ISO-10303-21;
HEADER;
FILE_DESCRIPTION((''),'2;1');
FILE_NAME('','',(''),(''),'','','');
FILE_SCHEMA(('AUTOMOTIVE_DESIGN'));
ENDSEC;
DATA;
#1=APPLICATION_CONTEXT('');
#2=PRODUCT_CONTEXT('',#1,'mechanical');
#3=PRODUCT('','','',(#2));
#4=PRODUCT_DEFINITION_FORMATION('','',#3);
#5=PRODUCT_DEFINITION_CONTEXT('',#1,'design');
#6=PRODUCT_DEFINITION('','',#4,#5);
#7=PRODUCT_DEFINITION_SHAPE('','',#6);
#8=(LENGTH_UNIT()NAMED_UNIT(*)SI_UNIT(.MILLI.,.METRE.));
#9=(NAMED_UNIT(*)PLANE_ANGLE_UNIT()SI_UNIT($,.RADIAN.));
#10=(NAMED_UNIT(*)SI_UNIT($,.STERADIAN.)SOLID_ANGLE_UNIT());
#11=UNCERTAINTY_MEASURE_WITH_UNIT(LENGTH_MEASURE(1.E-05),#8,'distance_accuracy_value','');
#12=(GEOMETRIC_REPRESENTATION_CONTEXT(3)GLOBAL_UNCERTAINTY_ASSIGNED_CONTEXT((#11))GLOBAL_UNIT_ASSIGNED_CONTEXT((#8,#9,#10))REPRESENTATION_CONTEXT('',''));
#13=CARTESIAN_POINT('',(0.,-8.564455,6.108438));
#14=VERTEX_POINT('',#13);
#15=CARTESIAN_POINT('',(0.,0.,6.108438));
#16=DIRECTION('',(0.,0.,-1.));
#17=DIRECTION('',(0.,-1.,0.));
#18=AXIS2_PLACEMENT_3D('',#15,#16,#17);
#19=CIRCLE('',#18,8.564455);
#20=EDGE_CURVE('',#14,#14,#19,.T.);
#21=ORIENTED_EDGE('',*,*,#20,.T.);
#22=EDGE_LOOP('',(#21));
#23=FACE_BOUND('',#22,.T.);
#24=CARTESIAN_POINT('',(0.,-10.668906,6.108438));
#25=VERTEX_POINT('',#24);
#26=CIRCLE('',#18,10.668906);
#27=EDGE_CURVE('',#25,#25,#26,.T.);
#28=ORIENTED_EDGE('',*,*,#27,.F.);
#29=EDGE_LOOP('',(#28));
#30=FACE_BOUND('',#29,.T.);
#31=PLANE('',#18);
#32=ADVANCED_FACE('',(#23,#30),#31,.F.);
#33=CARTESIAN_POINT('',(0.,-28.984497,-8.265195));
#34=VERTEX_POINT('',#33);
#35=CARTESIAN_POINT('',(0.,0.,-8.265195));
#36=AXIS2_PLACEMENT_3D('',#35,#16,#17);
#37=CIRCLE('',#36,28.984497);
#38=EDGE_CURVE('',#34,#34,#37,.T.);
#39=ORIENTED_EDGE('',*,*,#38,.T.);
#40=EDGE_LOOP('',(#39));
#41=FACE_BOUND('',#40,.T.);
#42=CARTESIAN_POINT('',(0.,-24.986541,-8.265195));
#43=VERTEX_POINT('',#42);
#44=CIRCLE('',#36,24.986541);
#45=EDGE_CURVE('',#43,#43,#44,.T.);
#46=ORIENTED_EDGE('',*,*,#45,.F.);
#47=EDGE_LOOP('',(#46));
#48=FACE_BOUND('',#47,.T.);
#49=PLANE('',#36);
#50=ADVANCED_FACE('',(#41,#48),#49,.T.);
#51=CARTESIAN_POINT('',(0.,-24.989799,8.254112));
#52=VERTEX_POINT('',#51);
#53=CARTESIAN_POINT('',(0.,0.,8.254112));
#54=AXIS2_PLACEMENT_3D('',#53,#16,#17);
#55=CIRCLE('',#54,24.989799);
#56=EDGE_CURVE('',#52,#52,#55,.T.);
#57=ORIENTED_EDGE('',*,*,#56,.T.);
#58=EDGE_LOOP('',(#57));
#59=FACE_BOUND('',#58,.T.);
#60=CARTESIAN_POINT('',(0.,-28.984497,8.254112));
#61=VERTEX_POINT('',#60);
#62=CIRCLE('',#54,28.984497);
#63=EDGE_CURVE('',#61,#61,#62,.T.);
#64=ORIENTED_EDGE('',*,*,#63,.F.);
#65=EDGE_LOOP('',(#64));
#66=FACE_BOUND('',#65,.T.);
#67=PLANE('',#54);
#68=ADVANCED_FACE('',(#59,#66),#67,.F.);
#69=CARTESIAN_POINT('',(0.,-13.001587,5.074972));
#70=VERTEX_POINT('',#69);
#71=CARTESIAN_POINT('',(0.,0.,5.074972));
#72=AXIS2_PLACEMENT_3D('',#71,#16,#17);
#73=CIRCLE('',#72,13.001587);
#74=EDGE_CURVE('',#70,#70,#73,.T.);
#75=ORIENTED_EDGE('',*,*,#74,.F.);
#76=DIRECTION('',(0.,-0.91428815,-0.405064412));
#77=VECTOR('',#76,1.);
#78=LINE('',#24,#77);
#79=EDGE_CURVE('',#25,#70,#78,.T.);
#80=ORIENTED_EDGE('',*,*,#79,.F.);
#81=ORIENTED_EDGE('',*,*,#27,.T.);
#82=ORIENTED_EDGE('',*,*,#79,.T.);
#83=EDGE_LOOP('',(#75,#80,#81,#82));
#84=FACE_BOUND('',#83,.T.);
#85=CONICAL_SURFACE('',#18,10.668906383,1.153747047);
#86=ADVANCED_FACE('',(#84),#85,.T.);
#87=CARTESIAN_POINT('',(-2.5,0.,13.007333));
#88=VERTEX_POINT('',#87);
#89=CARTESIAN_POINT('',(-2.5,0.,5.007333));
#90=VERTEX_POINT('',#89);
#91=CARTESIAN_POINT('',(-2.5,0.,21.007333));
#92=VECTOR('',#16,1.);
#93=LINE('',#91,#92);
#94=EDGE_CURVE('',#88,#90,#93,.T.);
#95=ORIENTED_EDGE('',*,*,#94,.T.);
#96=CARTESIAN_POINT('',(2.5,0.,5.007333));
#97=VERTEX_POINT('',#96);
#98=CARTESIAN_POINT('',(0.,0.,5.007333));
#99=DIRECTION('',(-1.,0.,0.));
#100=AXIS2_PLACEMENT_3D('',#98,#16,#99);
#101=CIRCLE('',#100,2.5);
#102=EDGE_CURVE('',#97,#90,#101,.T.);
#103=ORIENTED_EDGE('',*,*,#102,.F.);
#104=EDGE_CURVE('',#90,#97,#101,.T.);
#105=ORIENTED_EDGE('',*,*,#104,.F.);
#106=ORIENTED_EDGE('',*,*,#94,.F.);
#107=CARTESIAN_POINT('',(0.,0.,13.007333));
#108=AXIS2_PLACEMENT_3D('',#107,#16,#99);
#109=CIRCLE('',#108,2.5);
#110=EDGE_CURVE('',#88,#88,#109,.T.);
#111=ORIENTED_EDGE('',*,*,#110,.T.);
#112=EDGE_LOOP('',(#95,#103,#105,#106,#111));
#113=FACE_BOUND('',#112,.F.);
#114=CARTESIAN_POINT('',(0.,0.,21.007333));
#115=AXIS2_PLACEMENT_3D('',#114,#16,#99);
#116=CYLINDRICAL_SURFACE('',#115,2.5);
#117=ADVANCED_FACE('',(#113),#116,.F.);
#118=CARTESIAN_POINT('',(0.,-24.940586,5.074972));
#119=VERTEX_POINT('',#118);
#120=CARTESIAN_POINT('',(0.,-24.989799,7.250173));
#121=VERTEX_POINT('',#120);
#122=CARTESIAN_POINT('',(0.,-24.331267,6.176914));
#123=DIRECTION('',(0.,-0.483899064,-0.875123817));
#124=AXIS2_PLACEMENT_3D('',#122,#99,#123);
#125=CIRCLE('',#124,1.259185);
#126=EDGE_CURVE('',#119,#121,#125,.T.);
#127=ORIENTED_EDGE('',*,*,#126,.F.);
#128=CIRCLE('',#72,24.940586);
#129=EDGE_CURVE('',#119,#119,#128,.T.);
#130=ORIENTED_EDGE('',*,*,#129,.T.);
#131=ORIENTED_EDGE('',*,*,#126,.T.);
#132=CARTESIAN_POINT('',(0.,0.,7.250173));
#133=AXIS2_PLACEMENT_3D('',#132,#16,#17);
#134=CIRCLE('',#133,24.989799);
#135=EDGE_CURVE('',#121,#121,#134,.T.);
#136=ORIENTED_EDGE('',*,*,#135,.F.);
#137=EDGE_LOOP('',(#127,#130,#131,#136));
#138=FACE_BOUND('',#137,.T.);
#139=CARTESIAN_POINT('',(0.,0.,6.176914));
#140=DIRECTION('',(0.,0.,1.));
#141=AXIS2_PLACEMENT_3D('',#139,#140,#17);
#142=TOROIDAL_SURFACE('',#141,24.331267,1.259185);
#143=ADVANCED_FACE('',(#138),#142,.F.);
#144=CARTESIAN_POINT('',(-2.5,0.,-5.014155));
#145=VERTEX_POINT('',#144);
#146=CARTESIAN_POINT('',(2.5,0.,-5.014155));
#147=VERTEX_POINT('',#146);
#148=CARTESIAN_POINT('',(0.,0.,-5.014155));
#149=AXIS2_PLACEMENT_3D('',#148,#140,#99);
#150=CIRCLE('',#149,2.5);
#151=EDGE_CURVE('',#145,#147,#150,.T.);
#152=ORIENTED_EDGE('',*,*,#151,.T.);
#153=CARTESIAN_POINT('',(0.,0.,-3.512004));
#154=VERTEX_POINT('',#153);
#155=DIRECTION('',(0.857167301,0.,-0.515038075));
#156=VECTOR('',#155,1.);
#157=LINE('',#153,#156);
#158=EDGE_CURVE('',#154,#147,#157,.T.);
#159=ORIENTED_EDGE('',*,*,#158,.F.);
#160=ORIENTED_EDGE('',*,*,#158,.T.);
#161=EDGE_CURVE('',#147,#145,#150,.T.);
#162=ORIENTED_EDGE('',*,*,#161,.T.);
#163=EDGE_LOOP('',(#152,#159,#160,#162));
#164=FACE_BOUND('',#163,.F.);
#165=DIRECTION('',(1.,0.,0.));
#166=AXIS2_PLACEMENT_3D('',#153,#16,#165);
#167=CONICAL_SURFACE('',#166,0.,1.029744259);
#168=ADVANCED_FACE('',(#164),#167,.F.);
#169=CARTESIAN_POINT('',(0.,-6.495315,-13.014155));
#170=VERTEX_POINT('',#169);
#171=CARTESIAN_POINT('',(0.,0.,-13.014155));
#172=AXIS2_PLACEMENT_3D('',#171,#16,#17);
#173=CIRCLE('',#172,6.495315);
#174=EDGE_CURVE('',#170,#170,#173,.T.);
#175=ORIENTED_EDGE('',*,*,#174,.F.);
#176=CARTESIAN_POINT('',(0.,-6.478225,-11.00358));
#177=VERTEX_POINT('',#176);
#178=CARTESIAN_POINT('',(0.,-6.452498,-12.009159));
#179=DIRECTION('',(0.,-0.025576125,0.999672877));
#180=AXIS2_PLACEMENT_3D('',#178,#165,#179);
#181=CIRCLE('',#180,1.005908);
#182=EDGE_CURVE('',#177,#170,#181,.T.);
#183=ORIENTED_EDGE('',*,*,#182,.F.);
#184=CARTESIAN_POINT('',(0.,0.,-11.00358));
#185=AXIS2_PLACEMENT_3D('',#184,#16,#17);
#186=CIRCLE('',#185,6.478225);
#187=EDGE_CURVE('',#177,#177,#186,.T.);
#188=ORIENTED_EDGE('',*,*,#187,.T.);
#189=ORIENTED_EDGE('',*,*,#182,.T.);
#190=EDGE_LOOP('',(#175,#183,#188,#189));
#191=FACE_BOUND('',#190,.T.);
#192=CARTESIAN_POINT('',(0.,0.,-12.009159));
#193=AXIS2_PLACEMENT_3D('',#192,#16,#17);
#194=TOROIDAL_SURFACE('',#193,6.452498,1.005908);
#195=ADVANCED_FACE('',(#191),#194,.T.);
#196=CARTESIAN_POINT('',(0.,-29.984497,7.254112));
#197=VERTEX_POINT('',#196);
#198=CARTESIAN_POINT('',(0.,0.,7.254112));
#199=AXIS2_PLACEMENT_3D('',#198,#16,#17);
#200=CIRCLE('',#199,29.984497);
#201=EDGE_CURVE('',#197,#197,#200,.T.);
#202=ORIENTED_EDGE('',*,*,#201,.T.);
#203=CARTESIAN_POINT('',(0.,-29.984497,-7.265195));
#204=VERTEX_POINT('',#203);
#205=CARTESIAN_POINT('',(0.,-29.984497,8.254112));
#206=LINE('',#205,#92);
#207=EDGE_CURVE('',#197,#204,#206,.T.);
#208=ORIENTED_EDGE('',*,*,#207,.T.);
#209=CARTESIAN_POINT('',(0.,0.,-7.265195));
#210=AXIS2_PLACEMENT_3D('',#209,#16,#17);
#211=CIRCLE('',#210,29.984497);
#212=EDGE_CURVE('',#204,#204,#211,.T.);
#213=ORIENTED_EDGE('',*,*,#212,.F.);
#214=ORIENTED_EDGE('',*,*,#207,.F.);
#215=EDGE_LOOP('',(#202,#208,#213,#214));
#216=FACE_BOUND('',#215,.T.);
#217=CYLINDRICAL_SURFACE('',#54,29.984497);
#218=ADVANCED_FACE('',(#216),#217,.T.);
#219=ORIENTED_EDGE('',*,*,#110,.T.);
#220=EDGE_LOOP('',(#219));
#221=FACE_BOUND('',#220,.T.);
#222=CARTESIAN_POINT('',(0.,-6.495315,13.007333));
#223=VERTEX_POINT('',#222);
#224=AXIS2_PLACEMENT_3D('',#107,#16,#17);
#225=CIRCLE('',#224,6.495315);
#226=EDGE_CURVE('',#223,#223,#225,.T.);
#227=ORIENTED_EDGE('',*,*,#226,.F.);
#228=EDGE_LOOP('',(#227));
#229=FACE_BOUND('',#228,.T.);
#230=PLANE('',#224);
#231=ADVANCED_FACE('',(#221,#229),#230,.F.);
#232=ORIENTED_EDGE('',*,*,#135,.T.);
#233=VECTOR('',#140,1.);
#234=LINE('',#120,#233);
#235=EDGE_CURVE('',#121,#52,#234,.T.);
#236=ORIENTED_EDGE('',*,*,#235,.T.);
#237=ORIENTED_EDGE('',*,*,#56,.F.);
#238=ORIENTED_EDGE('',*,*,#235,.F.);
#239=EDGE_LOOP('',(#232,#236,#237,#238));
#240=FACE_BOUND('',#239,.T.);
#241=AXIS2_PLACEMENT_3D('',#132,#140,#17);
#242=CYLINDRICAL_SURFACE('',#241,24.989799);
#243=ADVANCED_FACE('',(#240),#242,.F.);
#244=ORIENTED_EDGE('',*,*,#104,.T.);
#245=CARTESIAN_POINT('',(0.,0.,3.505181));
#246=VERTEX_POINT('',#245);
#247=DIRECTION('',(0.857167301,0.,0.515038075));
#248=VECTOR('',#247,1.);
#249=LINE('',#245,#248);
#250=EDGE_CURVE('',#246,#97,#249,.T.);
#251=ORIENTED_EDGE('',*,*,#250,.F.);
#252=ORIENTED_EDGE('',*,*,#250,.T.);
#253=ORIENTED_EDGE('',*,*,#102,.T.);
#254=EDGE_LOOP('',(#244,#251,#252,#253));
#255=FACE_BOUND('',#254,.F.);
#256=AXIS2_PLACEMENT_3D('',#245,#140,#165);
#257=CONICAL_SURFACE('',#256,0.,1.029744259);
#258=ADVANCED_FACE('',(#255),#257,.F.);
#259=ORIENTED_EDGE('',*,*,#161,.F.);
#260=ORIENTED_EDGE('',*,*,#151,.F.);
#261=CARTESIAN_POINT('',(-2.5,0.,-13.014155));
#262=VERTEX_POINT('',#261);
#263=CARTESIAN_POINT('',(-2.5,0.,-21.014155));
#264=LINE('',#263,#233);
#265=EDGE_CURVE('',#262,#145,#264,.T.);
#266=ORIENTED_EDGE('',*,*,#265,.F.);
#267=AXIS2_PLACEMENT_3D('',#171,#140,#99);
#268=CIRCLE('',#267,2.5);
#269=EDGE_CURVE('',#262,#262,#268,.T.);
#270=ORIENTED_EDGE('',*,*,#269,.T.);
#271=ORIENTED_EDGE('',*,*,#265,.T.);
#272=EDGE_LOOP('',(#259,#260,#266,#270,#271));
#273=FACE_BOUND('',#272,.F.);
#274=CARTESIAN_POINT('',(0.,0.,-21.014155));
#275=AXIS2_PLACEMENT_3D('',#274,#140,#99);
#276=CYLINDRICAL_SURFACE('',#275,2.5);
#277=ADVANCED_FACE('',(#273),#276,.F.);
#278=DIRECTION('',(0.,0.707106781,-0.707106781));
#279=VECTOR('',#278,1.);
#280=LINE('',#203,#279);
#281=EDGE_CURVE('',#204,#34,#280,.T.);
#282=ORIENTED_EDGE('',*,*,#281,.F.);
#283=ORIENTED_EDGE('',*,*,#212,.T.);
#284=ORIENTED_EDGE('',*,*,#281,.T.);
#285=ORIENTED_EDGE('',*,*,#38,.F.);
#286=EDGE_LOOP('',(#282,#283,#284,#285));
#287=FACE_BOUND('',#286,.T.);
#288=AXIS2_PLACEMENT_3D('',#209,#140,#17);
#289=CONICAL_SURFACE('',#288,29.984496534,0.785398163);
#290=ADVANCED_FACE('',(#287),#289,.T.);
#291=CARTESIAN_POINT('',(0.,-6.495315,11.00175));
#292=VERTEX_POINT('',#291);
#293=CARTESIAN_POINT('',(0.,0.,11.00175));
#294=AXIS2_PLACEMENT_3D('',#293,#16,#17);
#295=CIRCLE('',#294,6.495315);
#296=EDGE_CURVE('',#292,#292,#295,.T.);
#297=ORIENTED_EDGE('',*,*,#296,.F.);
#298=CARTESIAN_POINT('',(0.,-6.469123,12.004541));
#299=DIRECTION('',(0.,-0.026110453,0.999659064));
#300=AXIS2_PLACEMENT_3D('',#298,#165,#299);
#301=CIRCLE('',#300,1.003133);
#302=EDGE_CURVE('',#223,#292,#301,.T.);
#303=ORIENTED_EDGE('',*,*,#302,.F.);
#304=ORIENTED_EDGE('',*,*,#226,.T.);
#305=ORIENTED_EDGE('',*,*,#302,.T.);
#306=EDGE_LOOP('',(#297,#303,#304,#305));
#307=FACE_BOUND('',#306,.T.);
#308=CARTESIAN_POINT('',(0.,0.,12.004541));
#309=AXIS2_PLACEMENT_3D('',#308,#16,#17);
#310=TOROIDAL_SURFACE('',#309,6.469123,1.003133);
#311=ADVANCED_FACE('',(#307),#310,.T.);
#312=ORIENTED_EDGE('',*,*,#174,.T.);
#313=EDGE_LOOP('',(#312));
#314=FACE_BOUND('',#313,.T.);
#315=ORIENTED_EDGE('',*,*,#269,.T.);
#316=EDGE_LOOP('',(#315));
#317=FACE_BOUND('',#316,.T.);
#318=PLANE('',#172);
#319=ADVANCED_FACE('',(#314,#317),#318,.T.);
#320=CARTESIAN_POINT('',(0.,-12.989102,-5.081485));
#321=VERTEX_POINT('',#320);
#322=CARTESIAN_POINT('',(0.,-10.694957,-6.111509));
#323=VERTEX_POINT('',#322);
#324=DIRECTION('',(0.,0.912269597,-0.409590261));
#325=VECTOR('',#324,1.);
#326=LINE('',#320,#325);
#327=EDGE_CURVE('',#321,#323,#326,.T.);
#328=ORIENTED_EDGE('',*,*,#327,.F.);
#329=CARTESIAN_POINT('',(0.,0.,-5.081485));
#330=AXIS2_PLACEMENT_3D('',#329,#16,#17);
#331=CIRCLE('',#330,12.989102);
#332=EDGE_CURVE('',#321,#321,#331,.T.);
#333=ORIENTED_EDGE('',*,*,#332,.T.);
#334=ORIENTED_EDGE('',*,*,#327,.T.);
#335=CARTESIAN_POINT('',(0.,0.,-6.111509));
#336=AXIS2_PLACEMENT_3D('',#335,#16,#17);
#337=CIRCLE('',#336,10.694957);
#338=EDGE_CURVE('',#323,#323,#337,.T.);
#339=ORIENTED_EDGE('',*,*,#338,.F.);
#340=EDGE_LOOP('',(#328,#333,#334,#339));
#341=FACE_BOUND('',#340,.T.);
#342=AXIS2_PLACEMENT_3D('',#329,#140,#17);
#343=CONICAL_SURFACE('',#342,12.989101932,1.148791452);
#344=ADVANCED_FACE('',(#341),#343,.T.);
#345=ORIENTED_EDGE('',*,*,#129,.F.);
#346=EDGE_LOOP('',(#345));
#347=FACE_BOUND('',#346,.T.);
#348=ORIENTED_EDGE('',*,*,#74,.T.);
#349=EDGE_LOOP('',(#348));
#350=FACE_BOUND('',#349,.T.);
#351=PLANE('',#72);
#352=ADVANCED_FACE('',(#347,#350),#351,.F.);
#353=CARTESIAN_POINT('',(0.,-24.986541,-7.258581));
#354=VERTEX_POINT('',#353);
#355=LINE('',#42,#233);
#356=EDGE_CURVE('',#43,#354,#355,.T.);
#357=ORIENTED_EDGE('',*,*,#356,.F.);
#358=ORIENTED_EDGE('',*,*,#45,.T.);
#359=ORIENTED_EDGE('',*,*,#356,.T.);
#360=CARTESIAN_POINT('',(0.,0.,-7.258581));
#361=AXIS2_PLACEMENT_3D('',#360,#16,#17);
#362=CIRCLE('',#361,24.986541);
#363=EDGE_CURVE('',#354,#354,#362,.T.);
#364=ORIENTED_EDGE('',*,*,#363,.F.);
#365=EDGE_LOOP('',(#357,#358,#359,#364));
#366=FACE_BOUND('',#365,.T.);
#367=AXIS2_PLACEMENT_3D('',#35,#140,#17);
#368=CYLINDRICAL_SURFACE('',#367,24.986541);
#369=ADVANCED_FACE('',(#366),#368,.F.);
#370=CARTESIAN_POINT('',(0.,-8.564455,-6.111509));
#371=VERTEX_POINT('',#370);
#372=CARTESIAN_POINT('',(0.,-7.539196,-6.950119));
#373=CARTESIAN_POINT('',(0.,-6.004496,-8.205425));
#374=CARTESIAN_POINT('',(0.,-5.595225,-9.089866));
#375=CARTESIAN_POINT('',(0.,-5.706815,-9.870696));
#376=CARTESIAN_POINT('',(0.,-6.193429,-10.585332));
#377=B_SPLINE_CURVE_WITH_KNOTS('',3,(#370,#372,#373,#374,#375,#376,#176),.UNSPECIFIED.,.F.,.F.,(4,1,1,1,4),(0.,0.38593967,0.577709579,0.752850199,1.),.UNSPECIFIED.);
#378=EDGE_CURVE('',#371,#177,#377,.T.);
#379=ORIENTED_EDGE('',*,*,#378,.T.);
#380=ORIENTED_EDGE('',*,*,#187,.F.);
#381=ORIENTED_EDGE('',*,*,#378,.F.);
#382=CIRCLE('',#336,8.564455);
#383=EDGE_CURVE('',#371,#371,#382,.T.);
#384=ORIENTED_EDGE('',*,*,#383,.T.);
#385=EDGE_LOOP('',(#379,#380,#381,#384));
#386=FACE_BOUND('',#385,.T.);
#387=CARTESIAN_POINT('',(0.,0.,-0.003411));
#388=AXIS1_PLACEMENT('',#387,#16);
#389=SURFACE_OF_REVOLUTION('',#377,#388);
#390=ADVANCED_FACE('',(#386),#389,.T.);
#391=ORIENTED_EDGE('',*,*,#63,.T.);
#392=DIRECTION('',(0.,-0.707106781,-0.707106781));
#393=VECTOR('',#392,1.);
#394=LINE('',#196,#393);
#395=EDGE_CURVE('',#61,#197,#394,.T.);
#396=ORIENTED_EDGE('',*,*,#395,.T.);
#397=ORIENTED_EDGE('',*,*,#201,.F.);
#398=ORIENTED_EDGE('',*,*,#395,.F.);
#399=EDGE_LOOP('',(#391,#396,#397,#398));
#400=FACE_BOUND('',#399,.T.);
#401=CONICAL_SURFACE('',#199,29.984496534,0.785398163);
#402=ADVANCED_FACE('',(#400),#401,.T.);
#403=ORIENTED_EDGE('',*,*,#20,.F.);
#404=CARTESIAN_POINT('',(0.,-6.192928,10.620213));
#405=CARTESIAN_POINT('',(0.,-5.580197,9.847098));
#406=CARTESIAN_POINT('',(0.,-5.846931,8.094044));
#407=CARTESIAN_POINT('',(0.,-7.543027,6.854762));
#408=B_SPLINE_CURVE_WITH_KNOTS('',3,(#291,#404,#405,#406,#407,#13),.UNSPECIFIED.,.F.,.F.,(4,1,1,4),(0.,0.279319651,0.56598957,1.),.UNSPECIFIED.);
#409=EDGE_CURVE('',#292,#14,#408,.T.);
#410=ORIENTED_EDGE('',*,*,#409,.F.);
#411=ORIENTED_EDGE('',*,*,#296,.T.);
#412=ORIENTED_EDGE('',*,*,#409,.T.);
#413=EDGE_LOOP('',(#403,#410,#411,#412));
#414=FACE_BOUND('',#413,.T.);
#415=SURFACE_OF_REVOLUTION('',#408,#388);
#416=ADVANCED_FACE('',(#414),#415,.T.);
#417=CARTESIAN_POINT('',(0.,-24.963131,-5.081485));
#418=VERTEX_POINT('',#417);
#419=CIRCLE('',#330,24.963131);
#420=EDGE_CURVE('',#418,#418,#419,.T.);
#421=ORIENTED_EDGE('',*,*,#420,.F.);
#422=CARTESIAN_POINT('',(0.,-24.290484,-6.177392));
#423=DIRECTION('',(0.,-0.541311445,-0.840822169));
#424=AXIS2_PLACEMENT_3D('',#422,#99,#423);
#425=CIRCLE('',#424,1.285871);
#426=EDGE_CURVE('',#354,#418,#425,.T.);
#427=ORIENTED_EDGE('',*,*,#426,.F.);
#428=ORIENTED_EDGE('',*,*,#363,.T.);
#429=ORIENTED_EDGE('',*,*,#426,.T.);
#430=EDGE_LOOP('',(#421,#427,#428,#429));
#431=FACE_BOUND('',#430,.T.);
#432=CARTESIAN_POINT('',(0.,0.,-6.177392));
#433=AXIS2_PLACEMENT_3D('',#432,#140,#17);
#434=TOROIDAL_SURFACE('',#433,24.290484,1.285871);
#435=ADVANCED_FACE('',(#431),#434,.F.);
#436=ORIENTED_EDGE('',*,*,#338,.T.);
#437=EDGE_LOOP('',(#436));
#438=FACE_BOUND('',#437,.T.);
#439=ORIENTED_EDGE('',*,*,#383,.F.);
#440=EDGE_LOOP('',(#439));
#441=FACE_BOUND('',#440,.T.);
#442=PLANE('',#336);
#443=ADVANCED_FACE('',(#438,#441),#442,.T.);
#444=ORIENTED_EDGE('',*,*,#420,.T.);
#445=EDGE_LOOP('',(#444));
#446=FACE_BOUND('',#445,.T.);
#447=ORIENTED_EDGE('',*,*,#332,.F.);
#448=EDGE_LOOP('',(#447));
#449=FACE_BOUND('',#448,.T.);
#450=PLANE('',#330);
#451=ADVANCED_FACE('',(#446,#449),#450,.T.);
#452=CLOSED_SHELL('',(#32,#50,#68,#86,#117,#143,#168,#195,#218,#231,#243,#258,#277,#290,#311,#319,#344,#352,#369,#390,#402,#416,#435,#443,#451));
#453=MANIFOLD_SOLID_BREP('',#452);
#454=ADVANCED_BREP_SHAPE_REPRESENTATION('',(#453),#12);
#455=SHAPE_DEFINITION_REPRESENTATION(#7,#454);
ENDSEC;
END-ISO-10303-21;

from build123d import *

# Parameters (mm, degrees)
F2_SIZE  = 1
F4_D     = 5
F4_DEPTH = 8
F4_TIP   = 1.5021515476
F6_D     = 5
F6_DEPTH = 8
F6_TIP   = 1.5021515476


# Not quite as in the source:
# - a feature names something its author has since deleted; it is built from what else it names


with BuildPart() as f1:
    # F0 (on Right) → F1 (revolve)
    with BuildSketch(Plane.YZ):
        with BuildLine():
            Line((0, 13.0073325709), (-6.4953151159, 13.0073325709))
            ThreePointArc((-6.4953151159, 13.0073325709), (-7.4722561915, 12.0045412332), (-6.4953151159, 11.0017498955))
            add(Edge.make_bspline(
                [(-6.4953151159, 11.0017498955), (-6.1929281207, 10.6202125837), (-5.580196849, 9.8470978466), (-5.8469313962, 8.0940443784), (-7.5430271882, 6.8547624607), (-8.5644554347, 6.1084381305)],
                knots=[0, 0, 0, 0, 0.2793196515, 0.5659895696, 1, 1, 1, 1], degree=3))
            Line((-8.5644554347, 6.1084381305), (-10.6689063832, 6.1084381305))
            Line((-10.6689063832, 6.1084381305), (-13.0015872419, 5.0749718212))
            Line((-13.0015872419, 5.0749718212), (-24.9405857176, 5.0749718212))
            ThreePointArc((-24.9405857176, 5.0749718212), (-25.5901300386, 6.1484332461), (-24.989798665, 7.2501725517))
            Line((-24.989798665, 7.2501725517), (-24.989798665, 8.2541117445))
            Line((-24.989798665, 8.2541117445), (-29.9844965339, 8.2541117445))
            Line((-29.9844965339, 8.2541117445), (-29.9844965339, -8.2651954144))
            Line((-29.9844965339, -8.2651954144), (-24.9865408987, -8.2651954144))
            Line((-24.9865408987, -8.2651954144), (-24.9865408987, -7.2585809976))
            ThreePointArc((-24.9865408987, -7.2585809976), (-25.5762810193, -6.1635660678), (-24.9631311744, -5.0814854912))
            Line((-24.9631311744, -5.0814854912), (-12.9891019315, -5.0814854912))
            Line((-12.9891019315, -5.0814854912), (-10.6949573383, -6.1115091667))
            Line((-10.6949573383, -6.1115091667), (-8.5644554347, -6.1115091667))
            add(Edge.make_bspline(
                [(-8.5644554347, -6.1115091667), (-7.5391964524, -6.9501185029), (-6.0044956131, -8.2054251856), (-5.595225451, -9.0898659277), (-5.7068148514, -9.8706956249), (-6.1934289739, -10.5853317949), (-6.478224881, -11.0035799444)],
                knots=[0, 0, 0, 0, 0.3859396697, 0.577709579, 0.7528501991, 1, 1, 1, 1], degree=3))
            ThreePointArc((-6.478224881, -11.0035799444), (-7.4583694346, -12.0006089311), (-6.4953151159, -13.01415544))
            Line((-6.4953151159, -13.01415544), (0, -13.01415544))
            Line((0, -13.01415544), (0, 13.0073325709))
        make_face()
    revolve(axis=Axis((0, 0, -0.0034114346), (0, 0, -1)))

    # F2
    f2_edges = [f1.edges().sort_by_distance(p)[0] for p in [
        (0, 29.984497, 8.254112),
        (0, 29.984497, -8.265195),
    ]]
    chamfer(f2_edges, length=F2_SIZE)

    # F4
    with Locations(Plane.XY.offset(13.0073325709)):
        with Locations((0, 0)):
            Hole(F4_D / 2, depth=F4_DEPTH)
            with Locations((0, 0, -(F4_DEPTH + F4_TIP / 2))):  # 118° drill point
                Cone(0, F4_D / 2, F4_TIP, mode=Mode.SUBTRACT)

    # F6
    with Locations(Plane(origin=(0, 0, -13.01415544), x_dir=(1, 0, 0), z_dir=(0, 0, -1))):
        with Locations((0, 0)):
            Hole(F6_D / 2, depth=F6_DEPTH)
            with Locations((0, 0, -(F6_DEPTH + F6_TIP / 2))):  # 118° drill point
                Cone(0, F6_D / 2, F6_TIP, mode=Mode.SUBTRACT)


solid = f1.part
